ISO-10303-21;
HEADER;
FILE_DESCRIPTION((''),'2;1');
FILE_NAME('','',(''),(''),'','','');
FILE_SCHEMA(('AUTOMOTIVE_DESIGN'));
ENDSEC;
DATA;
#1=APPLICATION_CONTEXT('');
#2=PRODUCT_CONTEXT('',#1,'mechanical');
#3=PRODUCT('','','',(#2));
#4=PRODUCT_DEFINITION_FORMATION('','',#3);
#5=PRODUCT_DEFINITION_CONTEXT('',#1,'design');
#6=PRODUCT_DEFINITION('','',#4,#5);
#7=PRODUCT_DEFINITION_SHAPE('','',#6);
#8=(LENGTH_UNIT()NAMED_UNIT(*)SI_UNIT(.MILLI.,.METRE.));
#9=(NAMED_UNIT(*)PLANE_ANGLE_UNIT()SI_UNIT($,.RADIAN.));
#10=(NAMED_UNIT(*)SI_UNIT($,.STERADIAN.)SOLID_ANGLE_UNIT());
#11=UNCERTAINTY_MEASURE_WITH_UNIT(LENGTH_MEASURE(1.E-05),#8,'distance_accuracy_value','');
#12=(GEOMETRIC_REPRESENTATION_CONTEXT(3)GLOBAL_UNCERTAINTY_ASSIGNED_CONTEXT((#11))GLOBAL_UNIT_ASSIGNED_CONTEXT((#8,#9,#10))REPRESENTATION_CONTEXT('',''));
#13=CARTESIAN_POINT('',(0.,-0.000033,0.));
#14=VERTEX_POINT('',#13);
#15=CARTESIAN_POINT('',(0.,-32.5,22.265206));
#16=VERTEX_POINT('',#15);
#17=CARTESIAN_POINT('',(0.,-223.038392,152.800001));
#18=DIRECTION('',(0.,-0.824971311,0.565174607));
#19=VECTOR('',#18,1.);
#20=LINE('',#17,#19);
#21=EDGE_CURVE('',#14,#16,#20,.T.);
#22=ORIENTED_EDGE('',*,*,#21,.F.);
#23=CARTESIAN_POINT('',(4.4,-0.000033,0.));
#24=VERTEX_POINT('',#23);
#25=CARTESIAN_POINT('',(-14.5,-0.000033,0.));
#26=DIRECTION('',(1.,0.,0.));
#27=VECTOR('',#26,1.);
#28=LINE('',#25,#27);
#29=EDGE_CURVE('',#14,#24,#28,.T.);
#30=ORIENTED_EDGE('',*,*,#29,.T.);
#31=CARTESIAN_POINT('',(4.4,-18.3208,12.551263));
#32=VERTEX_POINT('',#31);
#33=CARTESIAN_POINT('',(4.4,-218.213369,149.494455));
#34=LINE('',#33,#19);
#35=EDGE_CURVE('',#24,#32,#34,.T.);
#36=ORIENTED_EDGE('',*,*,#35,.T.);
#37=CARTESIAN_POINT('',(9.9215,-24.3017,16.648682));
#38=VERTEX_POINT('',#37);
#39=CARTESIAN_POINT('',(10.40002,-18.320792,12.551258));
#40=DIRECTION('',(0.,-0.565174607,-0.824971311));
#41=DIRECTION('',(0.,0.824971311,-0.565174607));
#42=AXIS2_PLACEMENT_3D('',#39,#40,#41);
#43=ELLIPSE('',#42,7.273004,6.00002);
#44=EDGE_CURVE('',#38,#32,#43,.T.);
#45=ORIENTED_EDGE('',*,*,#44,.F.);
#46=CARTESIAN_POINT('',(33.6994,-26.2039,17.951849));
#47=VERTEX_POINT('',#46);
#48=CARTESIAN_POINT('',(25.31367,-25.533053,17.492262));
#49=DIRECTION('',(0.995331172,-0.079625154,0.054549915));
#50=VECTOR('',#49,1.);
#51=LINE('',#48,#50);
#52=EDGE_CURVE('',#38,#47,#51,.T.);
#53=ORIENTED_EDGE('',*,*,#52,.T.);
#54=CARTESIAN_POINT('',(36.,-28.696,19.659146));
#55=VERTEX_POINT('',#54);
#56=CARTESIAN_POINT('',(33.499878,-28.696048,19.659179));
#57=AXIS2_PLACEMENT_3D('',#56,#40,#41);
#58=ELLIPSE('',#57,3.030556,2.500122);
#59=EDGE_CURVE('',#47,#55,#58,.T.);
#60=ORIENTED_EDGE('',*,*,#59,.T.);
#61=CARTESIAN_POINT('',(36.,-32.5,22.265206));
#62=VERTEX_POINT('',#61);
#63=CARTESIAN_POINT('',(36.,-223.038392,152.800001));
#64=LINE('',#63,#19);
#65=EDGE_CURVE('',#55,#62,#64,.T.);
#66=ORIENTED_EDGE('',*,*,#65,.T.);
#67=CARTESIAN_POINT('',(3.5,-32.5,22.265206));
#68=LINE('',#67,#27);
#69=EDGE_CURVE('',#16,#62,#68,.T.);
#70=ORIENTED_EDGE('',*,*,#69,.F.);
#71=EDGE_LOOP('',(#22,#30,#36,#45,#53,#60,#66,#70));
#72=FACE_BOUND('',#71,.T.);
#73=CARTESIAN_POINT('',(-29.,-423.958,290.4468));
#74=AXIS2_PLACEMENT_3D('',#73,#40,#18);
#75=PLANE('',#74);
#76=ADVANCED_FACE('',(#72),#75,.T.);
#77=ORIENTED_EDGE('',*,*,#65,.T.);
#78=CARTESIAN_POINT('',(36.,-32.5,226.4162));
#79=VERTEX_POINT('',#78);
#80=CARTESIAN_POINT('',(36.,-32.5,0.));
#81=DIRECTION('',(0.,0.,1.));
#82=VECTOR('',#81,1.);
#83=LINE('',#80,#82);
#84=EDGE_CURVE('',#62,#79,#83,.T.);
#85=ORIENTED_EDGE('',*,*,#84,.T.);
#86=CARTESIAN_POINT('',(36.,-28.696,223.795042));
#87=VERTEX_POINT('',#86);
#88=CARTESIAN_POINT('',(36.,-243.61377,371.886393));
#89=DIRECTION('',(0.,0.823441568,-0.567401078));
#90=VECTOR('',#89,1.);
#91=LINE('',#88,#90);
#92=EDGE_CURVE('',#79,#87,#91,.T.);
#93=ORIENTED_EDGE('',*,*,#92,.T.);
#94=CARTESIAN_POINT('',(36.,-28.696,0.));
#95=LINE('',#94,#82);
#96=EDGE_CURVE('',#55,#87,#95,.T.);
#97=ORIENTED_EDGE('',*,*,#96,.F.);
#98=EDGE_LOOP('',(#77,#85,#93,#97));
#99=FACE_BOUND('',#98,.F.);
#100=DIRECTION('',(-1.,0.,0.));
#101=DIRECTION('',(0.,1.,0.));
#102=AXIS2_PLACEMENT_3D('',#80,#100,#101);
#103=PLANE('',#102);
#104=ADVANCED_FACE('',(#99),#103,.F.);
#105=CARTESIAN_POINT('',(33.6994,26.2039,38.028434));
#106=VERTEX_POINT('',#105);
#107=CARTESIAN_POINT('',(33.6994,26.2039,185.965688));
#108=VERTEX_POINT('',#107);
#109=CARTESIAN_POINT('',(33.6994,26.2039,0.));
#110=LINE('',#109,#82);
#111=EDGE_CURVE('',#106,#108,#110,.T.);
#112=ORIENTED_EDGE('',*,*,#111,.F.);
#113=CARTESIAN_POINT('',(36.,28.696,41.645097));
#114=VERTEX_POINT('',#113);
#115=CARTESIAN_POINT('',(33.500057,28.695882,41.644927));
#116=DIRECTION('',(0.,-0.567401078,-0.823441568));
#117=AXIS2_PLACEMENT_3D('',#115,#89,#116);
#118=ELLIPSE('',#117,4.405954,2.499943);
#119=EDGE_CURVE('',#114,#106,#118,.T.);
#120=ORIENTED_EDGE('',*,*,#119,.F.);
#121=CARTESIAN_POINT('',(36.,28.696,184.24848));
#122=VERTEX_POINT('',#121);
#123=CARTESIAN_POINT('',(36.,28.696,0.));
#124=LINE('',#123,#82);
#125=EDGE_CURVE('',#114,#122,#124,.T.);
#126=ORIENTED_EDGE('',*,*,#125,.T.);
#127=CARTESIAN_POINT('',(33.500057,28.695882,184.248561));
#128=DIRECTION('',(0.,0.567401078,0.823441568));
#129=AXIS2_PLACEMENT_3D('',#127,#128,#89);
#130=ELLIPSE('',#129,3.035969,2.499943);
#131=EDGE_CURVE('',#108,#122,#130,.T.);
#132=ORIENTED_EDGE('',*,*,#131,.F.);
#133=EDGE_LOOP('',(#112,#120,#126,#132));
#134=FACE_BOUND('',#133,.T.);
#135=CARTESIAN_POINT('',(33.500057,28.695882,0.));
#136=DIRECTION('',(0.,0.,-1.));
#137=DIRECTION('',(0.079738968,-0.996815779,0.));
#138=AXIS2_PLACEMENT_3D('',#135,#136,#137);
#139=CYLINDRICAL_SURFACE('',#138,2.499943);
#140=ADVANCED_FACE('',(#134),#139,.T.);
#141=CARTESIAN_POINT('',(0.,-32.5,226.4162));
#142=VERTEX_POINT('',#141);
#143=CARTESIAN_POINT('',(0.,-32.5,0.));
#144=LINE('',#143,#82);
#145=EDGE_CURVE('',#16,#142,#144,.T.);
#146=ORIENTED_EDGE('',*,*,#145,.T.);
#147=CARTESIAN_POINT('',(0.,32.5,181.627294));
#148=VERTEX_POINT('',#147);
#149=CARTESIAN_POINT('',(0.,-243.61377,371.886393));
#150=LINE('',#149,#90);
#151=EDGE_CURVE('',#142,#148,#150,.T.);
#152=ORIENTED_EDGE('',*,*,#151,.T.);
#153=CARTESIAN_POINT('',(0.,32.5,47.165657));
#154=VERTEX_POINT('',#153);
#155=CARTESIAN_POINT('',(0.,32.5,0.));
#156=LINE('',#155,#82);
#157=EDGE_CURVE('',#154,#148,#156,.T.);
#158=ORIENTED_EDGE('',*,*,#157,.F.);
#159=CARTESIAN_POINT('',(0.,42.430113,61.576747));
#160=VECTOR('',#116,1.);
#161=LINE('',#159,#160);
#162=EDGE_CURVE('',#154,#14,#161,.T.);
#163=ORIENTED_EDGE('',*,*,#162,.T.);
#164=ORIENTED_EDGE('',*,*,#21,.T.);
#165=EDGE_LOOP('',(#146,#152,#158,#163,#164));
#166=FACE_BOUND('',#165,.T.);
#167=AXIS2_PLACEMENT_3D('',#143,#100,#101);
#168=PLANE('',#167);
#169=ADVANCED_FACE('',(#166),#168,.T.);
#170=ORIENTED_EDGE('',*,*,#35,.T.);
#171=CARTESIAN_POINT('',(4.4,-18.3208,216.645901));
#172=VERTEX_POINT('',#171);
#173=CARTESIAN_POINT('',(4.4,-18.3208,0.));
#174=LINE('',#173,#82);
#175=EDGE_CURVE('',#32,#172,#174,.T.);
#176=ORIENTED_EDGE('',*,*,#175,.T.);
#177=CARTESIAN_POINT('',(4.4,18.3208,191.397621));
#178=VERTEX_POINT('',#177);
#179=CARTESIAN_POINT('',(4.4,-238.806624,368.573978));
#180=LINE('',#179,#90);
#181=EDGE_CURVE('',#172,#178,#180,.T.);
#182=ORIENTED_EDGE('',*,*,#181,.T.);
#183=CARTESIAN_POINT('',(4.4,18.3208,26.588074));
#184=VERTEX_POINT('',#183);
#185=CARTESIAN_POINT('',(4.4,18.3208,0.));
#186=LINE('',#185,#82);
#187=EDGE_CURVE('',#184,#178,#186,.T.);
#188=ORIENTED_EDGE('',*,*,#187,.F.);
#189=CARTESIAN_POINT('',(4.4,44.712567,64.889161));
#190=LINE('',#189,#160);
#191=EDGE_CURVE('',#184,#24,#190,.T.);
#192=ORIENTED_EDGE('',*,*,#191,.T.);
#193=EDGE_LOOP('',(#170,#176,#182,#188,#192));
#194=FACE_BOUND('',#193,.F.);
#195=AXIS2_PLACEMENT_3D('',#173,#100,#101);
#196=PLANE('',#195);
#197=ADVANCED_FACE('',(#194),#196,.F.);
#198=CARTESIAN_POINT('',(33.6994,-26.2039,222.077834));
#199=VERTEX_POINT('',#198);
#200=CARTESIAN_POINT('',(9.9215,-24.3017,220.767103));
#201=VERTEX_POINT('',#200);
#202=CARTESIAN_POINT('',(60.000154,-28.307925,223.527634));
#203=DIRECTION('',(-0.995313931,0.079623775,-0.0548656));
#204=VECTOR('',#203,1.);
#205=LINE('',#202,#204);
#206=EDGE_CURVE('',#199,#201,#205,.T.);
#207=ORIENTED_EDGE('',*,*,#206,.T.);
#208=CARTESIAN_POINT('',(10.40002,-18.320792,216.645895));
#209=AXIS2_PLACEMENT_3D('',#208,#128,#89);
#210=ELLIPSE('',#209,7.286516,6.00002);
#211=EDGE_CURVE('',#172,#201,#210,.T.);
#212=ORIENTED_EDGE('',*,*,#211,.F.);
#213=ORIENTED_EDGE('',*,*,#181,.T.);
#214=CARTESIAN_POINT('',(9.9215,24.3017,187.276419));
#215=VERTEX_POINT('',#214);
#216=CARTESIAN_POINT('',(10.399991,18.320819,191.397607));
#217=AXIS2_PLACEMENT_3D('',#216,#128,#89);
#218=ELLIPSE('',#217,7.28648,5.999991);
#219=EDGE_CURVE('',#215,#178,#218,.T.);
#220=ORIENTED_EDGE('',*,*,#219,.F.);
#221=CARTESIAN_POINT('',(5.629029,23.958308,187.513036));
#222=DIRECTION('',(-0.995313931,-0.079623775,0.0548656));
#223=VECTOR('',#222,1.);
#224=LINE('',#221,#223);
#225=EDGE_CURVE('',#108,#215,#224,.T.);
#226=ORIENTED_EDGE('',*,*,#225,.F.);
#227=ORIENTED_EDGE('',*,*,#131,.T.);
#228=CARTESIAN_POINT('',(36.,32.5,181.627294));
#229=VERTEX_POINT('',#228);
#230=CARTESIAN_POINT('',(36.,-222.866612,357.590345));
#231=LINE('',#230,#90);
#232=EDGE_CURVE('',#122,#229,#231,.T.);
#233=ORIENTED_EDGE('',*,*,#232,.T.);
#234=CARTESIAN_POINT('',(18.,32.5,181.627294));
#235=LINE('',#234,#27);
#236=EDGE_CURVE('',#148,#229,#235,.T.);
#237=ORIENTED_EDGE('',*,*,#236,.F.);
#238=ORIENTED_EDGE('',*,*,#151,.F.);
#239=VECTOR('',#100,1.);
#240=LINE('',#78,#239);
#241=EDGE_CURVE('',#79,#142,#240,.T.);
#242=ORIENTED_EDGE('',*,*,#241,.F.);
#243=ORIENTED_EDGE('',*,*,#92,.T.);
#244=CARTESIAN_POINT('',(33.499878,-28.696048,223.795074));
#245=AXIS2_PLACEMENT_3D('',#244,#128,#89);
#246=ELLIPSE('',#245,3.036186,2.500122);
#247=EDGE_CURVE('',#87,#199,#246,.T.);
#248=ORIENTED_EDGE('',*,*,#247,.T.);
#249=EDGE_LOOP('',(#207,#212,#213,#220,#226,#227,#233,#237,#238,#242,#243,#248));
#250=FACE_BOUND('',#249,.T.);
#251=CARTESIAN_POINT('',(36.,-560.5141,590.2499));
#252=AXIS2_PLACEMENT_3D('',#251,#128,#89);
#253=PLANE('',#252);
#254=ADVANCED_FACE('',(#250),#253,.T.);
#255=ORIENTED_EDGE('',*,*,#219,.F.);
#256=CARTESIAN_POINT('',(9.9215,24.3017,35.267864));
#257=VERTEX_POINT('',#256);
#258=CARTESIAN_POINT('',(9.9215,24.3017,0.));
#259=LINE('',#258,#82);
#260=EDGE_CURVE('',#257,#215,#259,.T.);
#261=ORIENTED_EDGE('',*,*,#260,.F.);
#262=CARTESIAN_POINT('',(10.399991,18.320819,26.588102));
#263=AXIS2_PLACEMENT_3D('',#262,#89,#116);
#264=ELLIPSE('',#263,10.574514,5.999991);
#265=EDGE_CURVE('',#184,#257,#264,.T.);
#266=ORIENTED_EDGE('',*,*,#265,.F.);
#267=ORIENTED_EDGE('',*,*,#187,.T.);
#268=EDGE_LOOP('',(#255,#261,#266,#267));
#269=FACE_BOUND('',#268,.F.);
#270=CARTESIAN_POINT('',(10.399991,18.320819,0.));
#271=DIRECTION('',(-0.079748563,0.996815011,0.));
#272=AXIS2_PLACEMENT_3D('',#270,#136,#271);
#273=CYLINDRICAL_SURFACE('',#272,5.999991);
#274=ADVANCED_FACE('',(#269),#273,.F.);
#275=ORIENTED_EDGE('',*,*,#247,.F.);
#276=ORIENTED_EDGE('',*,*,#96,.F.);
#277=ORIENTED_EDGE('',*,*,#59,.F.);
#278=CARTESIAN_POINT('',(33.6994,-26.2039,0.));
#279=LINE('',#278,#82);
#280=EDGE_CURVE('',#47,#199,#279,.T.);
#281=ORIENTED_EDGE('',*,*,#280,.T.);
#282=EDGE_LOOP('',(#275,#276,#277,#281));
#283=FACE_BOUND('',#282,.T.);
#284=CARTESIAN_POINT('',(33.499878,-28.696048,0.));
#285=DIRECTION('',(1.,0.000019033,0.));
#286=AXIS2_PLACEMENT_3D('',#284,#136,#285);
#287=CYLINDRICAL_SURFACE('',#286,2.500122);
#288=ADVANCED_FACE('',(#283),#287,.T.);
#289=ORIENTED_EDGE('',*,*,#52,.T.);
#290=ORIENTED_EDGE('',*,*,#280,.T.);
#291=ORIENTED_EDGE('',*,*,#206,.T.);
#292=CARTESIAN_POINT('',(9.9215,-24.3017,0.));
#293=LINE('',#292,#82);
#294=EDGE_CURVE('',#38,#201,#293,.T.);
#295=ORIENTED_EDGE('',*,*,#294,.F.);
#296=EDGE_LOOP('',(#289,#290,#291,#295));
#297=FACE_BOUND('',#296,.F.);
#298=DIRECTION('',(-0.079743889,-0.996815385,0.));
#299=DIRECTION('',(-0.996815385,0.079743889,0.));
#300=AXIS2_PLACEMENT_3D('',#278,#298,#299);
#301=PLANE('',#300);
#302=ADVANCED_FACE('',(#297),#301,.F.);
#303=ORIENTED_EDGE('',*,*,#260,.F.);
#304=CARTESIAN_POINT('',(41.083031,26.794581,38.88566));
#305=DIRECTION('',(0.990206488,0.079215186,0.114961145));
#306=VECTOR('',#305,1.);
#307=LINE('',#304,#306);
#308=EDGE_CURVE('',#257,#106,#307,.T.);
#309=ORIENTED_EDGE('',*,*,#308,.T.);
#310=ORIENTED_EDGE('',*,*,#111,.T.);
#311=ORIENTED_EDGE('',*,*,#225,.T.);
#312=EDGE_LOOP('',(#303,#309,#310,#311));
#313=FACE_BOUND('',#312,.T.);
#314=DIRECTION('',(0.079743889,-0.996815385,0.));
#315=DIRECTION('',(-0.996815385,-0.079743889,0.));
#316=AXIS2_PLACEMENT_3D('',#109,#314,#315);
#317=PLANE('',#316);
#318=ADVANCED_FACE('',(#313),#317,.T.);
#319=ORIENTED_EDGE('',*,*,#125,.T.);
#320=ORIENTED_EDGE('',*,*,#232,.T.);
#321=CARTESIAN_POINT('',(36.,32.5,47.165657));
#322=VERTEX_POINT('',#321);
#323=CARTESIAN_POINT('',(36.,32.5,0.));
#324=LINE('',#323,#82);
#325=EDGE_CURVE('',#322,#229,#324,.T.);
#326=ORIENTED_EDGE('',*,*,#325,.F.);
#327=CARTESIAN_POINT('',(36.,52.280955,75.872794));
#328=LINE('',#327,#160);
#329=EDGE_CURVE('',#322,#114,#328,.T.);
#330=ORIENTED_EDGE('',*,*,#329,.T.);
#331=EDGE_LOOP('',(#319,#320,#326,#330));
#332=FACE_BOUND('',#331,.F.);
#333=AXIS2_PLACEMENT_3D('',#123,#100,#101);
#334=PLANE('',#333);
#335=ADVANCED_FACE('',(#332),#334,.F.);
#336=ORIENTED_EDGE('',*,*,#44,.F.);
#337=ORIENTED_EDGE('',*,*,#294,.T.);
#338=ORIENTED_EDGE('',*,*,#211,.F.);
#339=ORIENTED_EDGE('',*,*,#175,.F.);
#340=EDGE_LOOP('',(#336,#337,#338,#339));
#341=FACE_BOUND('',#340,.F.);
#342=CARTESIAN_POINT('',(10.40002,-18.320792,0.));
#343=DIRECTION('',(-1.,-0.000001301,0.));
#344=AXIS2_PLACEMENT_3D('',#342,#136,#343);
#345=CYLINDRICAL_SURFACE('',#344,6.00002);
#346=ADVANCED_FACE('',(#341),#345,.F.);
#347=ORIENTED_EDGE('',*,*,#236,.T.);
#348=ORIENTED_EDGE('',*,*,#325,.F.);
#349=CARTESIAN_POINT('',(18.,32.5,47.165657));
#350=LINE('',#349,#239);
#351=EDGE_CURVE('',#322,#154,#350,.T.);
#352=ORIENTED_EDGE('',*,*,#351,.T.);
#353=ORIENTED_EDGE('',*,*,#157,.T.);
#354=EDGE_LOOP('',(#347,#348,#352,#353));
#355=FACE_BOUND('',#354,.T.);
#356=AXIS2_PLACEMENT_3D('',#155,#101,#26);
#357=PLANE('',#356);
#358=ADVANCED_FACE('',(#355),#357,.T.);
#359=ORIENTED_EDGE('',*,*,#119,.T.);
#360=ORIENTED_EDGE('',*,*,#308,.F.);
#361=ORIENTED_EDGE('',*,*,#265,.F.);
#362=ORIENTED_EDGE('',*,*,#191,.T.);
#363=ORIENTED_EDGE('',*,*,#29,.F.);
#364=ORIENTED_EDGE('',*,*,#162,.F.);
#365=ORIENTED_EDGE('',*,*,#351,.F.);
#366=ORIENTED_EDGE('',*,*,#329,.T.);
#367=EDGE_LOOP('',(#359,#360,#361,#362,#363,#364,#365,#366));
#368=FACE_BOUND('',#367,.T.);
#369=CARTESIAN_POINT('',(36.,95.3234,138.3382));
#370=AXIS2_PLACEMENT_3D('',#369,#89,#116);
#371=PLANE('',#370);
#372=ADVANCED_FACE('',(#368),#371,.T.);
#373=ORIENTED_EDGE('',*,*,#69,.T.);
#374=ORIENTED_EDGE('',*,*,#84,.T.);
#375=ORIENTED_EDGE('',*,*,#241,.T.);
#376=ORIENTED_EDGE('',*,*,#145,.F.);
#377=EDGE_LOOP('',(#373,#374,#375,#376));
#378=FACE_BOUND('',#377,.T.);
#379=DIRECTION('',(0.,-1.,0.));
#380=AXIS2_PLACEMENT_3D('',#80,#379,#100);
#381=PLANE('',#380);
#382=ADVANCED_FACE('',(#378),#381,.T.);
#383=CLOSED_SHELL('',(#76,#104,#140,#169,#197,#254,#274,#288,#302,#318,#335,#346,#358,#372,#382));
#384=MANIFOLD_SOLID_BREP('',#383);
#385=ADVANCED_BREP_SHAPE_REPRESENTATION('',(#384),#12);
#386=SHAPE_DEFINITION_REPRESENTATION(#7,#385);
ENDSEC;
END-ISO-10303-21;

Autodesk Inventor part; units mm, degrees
ref_plane "Начальная плоскость" through (0, 0, 0) normal (0, 0, 1) x (1, 0, 0)
ref_plane "Конечная плоскость" through (0, 0, 226.4162) normal (0, 0, 1) x (1, 0, 0)
sketch "Эскиз" plane through (0, 0, 0) normal (0, 0, 1) x (1, 0, 0)
  line L0 (36, -32.5) -> (0, -32.5)
  line L1 (36, -32.5) -> (36, -28.696)
  line L2 (33.6994, -26.2039) -> (9.9215, -24.3017)
  line L3 (4.4, -18.3208) -> (4.4, 18.3208)
  line L4 (33.6994, 26.2039) -> (9.9215, 24.3017)
  line L5 (36, 28.696) -> (36, 32.5)
  line L6 (0, 32.5) -> (36, 32.5)
  line L7 (0, -32.5) -> (0, 32.5)
  arc A0 (4.4, -18.3208) -> (9.9215, -24.3017) centre (10.4, -18.3208) ccw
  arc A1 (9.9215, 24.3017) -> (4.4, 18.3208) centre (10.4, 18.3208) ccw
  arc A2 (36, -28.696) -> (33.6994, -26.2039) centre (33.5, -28.696) ccw
  arc A3 (33.6994, 26.2039) -> (36, 28.696) centre (33.5, 28.696) ccw
  line L8 (0, 45.5) -> (0, -45.5) construction
  line L9 (-7.2974, 0) -> (43.7847, 0) construction
  point P0 (36, -26.388)
  point P1 (4.4, -23.86)
  point P2 (4.4, 23.86)
  point P3 (36, 26.388)
  dimension "d3" = 36
  dimension "d5" = 4.4
  dimension "d7" = 65
  dimension "d9" = 8.64
  dimension "d11" = 8.64
  dimension "d13" = 6.112
  dimension "d15" = 6.112
  dimension "d22" = 6
  dimension "d23" = 2.5
  dimension "d24" = 32.5
  dimension "d25" = 0
extrude "Тело" add sketch "Эскиз" along normal up to surface (226.4162 mm away) from surface at 0
sketch "Sketch3" plane through (0, 0, 0) normal (0, 0, 1) x (1, 0, 0)
  line L0 (0, 0) -> (10, 0)
ref_plane "Work Plane7" through (0, 0, 0) normal (0, -1, 0) x (1, 0, 0)
sketch "Sketch4" plane through (0, 0, 0) normal (0, -1, 0) x (1, 0, 0)
  line L0 (-2, 0) -> (12, 0)
  line L1 (-2, 226.4162) -> (12, 226.4162)
  dimension "d29" = 226.4162
ref_plane "РабПлоскость8" through (-29, -423.958, 290.4468) normal (0, -0.5651746, -0.8249713) x (1, 0, 0)
split "Разделение1" plane through (-29, -423.958, 290.4468) removes the side toward (0, -0.5651746, -0.8249713)
ref_plane "РабПлоскость9" through (36, -560.5141, 590.2499) normal (0, 0.5674011, 0.8234416) x (1, 0, 0)
split "Разделение2" plane through (36, -560.5141, 590.2499) removes the side toward (0, 0.5674011, 0.8234416)
ref_plane "РабПлоскость10" through (36, 95.3234, 138.3382) normal (0, 0.8234416, -0.5674011) x (1, 0, 0)
split "Разделение3" plane through (36, 95.3234, 138.3382) removes the side toward (0, 0.8234416, -0.5674011)
equation "\"d3\" = b"
equation "\"d5\" = t1"
equation "\"d7\" = ParH"
equation "\"d9\" = msp_x1 + t2"
equation "\"d11\" = msp_x1 + t2"
equation "\"d13\" = -msp_x2 + t2"
equation "\"d15\" = -msp_x2 + t2"
equation "\"d22\" = R"
equation "\"d23\" = R1"
equation "\"d24\" = 0.5 * d7"
equation "\"d16\" = G_L"
equation "\"R1\" = 2.5"
equation "\"R\" = 6"
equation "\"t1\" = 4.4"
equation "\"t2\" = 7.2"
equation "\"ParH\" = 65"
equation "\"b\" = 36"
equation "\"msp_x1\" = 0.04 * b"
equation "\"msp_x2\" = -0.08 * t1 + 0.04 * b"
equation "\"G_L\" = d29"
equation "\"ex\" = 0"
equation "\"G_OFFSET_START\" = 0"
equation "\"G_OFFSET_END\" = 22.18382"
equation "\"d27\" = G_OFFSET_END + B_L"
equation "\"B_L\" = 204.2324"
properties part number "Швеллер 6.5U-226,42 ГОСТ 8240-97" material "Сталь, мягкая"
